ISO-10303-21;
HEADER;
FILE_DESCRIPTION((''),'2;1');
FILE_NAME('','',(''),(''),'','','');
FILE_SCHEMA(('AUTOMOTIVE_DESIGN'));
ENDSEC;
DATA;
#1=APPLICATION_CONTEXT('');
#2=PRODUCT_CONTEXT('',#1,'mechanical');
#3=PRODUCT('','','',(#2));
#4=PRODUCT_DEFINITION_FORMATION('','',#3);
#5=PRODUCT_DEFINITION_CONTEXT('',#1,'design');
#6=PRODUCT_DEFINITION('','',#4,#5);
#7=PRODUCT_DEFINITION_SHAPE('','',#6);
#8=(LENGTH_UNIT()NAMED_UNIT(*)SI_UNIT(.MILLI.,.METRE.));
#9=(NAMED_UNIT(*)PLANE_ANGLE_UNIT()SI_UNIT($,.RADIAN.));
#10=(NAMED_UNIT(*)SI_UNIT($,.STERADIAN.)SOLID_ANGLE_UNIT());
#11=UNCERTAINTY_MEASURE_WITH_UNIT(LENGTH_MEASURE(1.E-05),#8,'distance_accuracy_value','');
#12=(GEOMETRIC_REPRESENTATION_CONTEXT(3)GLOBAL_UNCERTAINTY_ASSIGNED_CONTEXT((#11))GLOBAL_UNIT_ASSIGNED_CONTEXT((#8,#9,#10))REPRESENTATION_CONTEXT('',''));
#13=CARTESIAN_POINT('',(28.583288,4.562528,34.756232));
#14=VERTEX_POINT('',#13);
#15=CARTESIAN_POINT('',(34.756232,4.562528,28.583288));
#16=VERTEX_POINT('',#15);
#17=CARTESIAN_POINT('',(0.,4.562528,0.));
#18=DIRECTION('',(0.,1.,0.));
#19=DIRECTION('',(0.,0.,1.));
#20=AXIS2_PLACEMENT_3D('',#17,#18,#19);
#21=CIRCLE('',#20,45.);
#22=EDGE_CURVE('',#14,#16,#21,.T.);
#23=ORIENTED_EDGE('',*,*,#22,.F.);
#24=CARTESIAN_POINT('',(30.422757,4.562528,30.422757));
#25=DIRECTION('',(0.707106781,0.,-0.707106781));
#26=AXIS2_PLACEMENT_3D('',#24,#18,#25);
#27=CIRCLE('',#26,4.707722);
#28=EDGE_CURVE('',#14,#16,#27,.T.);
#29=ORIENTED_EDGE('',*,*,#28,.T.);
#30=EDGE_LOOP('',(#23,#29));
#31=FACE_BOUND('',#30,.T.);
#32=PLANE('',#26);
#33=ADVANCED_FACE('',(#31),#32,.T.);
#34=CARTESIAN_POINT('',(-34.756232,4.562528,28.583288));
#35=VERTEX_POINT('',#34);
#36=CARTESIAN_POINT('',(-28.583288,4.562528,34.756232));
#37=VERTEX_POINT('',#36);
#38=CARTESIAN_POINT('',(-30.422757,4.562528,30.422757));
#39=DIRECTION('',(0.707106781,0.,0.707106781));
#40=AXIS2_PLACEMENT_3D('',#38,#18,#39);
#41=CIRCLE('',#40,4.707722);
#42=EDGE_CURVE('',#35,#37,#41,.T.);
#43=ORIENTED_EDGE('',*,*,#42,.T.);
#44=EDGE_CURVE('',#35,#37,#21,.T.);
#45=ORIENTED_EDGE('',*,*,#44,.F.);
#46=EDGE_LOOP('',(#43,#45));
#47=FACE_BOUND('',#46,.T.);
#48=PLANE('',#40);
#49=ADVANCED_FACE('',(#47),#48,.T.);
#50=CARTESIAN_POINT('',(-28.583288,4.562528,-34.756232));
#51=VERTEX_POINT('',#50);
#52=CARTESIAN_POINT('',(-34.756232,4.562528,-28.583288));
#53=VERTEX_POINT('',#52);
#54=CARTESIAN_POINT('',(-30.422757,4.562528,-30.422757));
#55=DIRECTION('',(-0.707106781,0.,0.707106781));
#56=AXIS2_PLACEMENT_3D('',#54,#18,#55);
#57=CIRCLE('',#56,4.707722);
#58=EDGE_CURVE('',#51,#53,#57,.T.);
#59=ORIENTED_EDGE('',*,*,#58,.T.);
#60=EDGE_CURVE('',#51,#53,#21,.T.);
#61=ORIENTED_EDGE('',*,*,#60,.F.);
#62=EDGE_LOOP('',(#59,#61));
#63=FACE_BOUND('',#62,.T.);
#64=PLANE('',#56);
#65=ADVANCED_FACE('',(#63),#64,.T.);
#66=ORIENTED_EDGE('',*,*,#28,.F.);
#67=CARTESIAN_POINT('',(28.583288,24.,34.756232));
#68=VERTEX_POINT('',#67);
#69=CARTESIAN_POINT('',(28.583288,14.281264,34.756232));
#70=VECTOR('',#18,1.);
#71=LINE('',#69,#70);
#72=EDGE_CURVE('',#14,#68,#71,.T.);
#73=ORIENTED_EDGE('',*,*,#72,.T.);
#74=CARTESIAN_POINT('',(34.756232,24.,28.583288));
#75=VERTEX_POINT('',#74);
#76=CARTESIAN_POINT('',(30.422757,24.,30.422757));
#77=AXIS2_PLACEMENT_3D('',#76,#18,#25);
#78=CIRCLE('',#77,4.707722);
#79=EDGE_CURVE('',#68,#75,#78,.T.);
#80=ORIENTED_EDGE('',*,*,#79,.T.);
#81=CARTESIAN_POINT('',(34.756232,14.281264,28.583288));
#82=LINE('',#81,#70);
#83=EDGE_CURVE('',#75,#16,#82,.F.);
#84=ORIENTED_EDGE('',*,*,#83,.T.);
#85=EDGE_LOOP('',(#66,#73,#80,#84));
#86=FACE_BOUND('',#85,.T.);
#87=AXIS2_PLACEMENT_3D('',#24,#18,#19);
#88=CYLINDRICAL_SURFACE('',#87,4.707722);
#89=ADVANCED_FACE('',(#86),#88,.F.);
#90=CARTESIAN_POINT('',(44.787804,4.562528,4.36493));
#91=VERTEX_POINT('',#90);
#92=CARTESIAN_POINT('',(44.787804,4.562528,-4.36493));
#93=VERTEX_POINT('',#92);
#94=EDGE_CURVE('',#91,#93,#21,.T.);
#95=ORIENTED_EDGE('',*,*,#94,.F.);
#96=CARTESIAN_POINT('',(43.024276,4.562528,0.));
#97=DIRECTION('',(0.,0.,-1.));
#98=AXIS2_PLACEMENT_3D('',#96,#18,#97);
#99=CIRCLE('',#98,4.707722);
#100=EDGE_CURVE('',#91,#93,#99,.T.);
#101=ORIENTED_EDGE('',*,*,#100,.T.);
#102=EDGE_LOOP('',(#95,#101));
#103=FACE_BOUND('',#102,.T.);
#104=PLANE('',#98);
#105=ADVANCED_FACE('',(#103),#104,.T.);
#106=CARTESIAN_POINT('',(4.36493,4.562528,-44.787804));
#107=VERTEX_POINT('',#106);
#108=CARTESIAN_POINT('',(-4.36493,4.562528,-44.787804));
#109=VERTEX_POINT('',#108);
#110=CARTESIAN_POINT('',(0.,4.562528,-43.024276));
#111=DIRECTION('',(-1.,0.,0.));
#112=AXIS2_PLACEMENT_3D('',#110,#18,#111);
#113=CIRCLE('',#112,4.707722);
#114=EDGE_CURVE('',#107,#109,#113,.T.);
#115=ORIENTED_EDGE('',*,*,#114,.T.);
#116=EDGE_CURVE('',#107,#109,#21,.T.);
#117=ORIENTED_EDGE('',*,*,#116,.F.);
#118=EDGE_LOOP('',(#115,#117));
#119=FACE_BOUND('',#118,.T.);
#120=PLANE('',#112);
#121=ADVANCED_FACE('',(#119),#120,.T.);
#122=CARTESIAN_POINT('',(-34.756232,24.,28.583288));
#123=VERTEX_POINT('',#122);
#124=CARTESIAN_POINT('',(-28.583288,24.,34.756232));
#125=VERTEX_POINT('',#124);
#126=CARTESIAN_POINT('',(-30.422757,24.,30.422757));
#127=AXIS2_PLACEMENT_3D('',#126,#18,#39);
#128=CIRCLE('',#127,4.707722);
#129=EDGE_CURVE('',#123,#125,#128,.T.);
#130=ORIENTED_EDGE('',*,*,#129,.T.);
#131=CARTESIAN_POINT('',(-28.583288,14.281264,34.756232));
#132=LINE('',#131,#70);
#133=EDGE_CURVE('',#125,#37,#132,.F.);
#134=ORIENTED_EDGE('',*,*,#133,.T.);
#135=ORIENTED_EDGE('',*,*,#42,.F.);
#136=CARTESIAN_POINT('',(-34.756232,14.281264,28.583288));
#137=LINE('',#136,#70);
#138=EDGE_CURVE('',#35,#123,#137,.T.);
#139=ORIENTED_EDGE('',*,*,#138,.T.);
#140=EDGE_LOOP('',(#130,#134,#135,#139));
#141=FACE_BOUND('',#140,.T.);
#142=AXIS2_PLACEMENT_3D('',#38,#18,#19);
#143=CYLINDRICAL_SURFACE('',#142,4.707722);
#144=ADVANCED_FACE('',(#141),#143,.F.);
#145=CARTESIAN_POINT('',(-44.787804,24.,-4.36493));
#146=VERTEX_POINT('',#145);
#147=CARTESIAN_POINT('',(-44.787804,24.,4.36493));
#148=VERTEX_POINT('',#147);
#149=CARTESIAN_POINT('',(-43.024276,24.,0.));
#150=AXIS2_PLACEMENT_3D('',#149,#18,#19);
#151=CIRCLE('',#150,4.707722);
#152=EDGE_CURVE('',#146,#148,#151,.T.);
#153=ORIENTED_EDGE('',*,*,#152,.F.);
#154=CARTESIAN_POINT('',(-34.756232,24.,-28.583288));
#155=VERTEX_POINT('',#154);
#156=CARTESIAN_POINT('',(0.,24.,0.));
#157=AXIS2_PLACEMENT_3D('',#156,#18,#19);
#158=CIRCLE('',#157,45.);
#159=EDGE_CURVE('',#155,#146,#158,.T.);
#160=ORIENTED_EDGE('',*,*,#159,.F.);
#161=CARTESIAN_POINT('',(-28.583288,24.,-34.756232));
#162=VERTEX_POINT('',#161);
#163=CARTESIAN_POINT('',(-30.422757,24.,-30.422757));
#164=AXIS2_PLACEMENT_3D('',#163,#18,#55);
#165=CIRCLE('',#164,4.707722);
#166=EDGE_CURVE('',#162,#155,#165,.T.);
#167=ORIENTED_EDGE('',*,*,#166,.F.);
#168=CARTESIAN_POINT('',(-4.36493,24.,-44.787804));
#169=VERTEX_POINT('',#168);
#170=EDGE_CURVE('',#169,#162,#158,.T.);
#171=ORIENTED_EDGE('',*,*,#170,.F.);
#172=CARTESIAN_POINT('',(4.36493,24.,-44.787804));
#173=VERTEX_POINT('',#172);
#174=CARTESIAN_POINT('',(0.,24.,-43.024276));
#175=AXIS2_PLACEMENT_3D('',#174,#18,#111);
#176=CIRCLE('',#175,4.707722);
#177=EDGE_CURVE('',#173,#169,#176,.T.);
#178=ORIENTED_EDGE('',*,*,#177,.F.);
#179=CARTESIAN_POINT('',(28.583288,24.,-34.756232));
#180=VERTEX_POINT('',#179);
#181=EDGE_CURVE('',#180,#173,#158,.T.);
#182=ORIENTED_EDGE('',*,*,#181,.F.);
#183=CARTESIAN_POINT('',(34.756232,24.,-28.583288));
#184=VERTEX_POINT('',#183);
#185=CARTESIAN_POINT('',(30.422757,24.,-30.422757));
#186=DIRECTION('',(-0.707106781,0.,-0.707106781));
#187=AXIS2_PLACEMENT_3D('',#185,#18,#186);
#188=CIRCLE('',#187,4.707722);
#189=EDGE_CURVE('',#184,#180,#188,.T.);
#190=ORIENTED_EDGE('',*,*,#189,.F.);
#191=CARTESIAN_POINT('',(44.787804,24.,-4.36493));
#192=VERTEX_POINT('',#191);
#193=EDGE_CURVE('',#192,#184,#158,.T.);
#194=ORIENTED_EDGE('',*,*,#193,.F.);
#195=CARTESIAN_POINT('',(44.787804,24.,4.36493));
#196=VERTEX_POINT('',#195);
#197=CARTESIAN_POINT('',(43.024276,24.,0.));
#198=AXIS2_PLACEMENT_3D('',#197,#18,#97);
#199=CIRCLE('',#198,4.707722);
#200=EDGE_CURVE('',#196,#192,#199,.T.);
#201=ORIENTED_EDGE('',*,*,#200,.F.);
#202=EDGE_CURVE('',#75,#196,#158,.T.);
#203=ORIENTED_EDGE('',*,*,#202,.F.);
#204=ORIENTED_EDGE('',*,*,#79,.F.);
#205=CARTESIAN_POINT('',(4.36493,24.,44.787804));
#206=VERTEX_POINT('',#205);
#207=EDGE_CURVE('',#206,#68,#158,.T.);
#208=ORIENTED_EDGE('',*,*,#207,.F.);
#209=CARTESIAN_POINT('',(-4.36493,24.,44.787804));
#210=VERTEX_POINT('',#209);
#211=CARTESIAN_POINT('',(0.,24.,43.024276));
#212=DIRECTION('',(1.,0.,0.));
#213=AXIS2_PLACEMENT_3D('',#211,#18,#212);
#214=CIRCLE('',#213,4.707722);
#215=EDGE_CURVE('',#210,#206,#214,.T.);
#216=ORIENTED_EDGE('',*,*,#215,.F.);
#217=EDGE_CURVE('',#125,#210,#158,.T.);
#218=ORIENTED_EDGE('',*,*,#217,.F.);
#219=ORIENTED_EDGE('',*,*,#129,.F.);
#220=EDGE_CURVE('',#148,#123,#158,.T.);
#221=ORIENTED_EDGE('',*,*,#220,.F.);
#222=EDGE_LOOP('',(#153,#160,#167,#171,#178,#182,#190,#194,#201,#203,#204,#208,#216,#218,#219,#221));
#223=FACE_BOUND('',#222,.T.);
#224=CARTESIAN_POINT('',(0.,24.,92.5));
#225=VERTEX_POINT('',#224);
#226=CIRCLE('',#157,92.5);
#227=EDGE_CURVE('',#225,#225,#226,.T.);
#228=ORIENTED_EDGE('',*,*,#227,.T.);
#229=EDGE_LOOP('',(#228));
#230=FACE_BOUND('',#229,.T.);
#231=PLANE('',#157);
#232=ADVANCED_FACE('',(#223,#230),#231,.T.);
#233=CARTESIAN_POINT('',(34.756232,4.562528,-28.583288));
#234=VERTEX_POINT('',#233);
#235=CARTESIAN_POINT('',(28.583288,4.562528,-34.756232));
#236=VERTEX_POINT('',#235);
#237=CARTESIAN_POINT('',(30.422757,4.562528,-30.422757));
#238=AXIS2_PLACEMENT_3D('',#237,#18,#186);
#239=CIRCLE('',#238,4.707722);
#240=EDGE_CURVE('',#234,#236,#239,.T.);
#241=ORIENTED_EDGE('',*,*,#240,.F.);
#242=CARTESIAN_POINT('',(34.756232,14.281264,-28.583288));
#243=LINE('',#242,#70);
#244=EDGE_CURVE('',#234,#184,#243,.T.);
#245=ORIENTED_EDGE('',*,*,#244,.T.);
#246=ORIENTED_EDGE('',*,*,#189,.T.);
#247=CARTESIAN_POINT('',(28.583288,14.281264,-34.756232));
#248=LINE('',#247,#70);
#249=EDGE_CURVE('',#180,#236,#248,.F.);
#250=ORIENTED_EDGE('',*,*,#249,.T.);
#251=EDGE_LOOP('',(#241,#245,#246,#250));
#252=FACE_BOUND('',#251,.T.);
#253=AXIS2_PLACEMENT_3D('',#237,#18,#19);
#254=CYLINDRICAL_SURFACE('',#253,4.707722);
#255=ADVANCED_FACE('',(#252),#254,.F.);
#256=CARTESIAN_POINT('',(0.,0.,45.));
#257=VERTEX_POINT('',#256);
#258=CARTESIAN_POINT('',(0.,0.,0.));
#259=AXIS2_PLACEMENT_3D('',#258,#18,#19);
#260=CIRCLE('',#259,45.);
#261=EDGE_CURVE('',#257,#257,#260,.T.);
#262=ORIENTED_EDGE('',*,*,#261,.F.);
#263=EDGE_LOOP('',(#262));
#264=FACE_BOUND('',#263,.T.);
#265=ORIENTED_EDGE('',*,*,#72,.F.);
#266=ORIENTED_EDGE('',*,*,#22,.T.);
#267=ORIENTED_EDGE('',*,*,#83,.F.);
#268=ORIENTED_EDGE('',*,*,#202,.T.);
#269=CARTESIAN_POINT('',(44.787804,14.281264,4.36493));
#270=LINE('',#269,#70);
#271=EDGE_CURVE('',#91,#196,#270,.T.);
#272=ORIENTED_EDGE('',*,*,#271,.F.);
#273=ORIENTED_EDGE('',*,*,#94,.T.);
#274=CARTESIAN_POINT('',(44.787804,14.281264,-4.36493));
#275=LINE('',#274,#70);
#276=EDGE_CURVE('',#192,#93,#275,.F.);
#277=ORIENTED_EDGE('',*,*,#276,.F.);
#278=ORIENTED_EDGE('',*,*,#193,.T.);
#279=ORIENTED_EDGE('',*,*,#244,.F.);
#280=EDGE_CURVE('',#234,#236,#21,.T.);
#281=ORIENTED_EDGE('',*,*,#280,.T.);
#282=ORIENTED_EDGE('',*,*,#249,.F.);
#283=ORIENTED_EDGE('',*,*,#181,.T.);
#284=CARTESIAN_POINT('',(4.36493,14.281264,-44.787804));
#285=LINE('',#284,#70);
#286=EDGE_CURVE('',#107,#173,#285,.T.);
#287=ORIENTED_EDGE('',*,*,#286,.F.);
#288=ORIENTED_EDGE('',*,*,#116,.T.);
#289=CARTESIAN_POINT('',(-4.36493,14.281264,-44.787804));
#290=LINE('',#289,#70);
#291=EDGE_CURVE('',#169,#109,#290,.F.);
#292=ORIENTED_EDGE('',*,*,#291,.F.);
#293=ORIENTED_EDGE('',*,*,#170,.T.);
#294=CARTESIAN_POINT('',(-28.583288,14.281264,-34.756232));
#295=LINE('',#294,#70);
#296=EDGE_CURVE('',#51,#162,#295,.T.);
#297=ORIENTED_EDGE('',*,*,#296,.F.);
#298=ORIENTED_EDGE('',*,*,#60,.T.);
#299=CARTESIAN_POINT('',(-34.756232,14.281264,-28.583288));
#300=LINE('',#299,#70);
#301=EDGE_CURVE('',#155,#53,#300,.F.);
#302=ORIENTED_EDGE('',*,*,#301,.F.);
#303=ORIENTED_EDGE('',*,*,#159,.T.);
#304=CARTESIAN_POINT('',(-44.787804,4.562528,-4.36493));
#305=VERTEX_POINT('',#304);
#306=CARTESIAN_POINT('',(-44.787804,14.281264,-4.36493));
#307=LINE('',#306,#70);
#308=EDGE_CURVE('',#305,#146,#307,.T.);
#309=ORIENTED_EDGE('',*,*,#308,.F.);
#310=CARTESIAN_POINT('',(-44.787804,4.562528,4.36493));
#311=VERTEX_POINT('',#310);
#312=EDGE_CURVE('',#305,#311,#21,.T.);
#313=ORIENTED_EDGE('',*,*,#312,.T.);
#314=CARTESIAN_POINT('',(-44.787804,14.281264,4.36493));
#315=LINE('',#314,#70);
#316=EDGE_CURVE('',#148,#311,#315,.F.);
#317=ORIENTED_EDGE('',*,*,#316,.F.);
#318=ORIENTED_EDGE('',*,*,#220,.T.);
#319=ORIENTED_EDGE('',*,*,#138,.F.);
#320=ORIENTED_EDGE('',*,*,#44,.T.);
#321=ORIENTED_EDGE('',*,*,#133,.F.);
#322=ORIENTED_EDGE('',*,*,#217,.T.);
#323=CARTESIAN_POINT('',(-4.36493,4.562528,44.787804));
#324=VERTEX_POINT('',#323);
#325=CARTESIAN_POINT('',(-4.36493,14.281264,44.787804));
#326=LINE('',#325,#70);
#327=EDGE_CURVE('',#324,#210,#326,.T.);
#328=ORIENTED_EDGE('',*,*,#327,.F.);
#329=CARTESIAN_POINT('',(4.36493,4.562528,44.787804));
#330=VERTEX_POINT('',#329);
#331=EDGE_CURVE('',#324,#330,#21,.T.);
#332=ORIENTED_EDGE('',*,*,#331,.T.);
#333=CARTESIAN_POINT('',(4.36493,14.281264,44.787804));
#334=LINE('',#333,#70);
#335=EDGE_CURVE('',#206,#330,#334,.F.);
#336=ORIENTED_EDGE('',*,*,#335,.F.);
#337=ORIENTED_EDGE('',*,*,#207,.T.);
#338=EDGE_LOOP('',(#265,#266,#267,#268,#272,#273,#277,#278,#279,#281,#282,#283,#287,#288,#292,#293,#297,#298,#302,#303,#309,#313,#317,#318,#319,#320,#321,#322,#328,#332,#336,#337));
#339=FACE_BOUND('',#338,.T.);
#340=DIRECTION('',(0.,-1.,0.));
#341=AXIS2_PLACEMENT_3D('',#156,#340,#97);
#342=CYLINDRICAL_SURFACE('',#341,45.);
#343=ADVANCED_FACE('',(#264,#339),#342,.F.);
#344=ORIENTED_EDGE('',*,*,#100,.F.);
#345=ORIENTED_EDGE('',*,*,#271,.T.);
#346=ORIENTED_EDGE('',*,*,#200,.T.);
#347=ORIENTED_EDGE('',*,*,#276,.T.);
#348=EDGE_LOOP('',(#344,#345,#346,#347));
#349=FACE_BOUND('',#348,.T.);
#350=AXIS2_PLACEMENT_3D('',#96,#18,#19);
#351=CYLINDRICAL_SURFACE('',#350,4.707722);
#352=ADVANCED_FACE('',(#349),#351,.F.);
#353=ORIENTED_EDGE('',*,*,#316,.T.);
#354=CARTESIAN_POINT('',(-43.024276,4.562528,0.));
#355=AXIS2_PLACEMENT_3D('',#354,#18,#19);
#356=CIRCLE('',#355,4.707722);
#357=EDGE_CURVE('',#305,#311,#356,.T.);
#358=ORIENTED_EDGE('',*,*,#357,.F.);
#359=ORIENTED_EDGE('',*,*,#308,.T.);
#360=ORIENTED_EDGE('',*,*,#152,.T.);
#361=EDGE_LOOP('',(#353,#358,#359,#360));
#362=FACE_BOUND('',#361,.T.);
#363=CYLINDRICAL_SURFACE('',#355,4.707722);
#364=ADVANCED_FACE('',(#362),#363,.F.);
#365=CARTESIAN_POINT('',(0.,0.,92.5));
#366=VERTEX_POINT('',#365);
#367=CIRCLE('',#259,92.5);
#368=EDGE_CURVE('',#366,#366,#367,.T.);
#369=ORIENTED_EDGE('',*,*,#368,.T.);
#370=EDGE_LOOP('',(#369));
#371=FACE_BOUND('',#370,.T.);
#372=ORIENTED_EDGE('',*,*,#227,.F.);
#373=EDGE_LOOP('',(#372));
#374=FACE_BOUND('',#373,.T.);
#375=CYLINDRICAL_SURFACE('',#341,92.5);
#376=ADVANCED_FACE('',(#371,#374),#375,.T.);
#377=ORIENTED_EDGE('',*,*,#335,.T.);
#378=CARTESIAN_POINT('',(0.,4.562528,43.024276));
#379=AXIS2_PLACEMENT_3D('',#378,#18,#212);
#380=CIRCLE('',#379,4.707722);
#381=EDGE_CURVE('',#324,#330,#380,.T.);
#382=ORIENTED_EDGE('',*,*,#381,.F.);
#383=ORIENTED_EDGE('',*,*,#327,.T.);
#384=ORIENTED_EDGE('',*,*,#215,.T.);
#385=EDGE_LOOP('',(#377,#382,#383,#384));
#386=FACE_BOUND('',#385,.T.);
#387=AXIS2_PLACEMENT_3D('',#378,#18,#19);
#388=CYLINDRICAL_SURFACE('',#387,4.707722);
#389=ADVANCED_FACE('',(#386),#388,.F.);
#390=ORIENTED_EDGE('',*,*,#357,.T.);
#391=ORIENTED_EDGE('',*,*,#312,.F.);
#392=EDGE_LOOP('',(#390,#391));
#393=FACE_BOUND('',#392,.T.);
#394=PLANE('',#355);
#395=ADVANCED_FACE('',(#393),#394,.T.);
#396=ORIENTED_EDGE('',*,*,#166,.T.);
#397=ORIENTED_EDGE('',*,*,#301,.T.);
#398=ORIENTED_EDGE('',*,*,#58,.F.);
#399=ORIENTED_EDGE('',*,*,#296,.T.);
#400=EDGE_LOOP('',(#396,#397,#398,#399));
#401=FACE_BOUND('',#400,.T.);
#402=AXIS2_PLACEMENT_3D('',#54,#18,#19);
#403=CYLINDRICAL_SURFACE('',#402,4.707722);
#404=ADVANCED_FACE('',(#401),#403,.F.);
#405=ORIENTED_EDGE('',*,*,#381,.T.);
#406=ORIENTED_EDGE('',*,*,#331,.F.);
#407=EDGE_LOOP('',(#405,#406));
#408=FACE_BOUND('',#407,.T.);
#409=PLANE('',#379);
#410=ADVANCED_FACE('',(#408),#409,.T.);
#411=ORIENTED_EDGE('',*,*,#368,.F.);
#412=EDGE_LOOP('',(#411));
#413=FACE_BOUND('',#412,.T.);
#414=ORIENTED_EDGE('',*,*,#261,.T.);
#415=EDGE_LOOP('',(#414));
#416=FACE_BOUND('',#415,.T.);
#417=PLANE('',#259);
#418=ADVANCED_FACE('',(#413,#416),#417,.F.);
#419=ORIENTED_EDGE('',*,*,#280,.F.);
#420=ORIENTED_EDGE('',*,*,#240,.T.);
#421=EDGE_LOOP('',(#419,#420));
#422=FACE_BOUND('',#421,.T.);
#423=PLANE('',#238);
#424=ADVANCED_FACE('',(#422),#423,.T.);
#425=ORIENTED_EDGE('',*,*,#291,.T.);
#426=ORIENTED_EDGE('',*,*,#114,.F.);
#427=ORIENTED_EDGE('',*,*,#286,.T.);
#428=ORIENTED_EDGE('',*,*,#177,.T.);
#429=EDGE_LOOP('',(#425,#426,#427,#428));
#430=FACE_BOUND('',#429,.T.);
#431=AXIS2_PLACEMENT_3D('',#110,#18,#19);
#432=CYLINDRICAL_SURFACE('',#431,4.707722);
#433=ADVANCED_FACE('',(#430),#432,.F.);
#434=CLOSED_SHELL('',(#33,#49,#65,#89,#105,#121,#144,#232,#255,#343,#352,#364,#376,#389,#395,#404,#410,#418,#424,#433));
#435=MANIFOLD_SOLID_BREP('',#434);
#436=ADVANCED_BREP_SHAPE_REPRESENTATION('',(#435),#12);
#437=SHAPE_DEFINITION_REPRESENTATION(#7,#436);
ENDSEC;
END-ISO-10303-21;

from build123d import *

# Parameters (mm, degrees)
SKETCH1_R           = 92.5
BOSS_EXTRUDE1_DEPTH = 24
SKETCH2_R           = 45
CUT_EXTRUDE1_DEPTH  = 133.998120287
SKETCH3_R           = 4.707721969
CUT_EXTRUDE2_DEPTH  = 19.437471733
CIRPATTERN1_COUNT   = 8


with BuildPart() as part:
    # Sketch1 → Boss-Extrude1 (new body)
    with BuildSketch(Plane(origin=(0, 0, 0), x_dir=(1, 0, 0), z_dir=(0, 1, 0))):
        Circle(SKETCH1_R)
    extrude(amount=BOSS_EXTRUDE1_DEPTH)

    # Sketch2 → Cut-Extrude1 (cut, through all)
    with BuildSketch(Plane(origin=(0, 0, 0), x_dir=(1, 0, 0), z_dir=(0, 1, 0))):
        Circle(SKETCH2_R)
    extrude(amount=CUT_EXTRUDE1_DEPTH, mode=Mode.SUBTRACT)

    # Sketch3 → Cut-Extrude2 (cut)
    with BuildSketch(Plane(origin=(0, 24, 0), x_dir=(1, 0, 0), z_dir=(0, 1, 0))):
        with Locations((-43.024276092, 0)):
            Circle(SKETCH3_R)
    cut_extrude2 = extrude(amount=-CUT_EXTRUDE2_DEPTH, mode=Mode.SUBTRACT)

    # CirPattern1: Cut-Extrude2 ×8 about axis
    cirpattern1_axis = Axis((0, 0, 0), (0, 1, 0))
    for i in range(1, CIRPATTERN1_COUNT):
        add(cut_extrude2.rotate(cirpattern1_axis, i * 360 / CIRPATTERN1_COUNT), mode=Mode.SUBTRACT)


solid = part.part
